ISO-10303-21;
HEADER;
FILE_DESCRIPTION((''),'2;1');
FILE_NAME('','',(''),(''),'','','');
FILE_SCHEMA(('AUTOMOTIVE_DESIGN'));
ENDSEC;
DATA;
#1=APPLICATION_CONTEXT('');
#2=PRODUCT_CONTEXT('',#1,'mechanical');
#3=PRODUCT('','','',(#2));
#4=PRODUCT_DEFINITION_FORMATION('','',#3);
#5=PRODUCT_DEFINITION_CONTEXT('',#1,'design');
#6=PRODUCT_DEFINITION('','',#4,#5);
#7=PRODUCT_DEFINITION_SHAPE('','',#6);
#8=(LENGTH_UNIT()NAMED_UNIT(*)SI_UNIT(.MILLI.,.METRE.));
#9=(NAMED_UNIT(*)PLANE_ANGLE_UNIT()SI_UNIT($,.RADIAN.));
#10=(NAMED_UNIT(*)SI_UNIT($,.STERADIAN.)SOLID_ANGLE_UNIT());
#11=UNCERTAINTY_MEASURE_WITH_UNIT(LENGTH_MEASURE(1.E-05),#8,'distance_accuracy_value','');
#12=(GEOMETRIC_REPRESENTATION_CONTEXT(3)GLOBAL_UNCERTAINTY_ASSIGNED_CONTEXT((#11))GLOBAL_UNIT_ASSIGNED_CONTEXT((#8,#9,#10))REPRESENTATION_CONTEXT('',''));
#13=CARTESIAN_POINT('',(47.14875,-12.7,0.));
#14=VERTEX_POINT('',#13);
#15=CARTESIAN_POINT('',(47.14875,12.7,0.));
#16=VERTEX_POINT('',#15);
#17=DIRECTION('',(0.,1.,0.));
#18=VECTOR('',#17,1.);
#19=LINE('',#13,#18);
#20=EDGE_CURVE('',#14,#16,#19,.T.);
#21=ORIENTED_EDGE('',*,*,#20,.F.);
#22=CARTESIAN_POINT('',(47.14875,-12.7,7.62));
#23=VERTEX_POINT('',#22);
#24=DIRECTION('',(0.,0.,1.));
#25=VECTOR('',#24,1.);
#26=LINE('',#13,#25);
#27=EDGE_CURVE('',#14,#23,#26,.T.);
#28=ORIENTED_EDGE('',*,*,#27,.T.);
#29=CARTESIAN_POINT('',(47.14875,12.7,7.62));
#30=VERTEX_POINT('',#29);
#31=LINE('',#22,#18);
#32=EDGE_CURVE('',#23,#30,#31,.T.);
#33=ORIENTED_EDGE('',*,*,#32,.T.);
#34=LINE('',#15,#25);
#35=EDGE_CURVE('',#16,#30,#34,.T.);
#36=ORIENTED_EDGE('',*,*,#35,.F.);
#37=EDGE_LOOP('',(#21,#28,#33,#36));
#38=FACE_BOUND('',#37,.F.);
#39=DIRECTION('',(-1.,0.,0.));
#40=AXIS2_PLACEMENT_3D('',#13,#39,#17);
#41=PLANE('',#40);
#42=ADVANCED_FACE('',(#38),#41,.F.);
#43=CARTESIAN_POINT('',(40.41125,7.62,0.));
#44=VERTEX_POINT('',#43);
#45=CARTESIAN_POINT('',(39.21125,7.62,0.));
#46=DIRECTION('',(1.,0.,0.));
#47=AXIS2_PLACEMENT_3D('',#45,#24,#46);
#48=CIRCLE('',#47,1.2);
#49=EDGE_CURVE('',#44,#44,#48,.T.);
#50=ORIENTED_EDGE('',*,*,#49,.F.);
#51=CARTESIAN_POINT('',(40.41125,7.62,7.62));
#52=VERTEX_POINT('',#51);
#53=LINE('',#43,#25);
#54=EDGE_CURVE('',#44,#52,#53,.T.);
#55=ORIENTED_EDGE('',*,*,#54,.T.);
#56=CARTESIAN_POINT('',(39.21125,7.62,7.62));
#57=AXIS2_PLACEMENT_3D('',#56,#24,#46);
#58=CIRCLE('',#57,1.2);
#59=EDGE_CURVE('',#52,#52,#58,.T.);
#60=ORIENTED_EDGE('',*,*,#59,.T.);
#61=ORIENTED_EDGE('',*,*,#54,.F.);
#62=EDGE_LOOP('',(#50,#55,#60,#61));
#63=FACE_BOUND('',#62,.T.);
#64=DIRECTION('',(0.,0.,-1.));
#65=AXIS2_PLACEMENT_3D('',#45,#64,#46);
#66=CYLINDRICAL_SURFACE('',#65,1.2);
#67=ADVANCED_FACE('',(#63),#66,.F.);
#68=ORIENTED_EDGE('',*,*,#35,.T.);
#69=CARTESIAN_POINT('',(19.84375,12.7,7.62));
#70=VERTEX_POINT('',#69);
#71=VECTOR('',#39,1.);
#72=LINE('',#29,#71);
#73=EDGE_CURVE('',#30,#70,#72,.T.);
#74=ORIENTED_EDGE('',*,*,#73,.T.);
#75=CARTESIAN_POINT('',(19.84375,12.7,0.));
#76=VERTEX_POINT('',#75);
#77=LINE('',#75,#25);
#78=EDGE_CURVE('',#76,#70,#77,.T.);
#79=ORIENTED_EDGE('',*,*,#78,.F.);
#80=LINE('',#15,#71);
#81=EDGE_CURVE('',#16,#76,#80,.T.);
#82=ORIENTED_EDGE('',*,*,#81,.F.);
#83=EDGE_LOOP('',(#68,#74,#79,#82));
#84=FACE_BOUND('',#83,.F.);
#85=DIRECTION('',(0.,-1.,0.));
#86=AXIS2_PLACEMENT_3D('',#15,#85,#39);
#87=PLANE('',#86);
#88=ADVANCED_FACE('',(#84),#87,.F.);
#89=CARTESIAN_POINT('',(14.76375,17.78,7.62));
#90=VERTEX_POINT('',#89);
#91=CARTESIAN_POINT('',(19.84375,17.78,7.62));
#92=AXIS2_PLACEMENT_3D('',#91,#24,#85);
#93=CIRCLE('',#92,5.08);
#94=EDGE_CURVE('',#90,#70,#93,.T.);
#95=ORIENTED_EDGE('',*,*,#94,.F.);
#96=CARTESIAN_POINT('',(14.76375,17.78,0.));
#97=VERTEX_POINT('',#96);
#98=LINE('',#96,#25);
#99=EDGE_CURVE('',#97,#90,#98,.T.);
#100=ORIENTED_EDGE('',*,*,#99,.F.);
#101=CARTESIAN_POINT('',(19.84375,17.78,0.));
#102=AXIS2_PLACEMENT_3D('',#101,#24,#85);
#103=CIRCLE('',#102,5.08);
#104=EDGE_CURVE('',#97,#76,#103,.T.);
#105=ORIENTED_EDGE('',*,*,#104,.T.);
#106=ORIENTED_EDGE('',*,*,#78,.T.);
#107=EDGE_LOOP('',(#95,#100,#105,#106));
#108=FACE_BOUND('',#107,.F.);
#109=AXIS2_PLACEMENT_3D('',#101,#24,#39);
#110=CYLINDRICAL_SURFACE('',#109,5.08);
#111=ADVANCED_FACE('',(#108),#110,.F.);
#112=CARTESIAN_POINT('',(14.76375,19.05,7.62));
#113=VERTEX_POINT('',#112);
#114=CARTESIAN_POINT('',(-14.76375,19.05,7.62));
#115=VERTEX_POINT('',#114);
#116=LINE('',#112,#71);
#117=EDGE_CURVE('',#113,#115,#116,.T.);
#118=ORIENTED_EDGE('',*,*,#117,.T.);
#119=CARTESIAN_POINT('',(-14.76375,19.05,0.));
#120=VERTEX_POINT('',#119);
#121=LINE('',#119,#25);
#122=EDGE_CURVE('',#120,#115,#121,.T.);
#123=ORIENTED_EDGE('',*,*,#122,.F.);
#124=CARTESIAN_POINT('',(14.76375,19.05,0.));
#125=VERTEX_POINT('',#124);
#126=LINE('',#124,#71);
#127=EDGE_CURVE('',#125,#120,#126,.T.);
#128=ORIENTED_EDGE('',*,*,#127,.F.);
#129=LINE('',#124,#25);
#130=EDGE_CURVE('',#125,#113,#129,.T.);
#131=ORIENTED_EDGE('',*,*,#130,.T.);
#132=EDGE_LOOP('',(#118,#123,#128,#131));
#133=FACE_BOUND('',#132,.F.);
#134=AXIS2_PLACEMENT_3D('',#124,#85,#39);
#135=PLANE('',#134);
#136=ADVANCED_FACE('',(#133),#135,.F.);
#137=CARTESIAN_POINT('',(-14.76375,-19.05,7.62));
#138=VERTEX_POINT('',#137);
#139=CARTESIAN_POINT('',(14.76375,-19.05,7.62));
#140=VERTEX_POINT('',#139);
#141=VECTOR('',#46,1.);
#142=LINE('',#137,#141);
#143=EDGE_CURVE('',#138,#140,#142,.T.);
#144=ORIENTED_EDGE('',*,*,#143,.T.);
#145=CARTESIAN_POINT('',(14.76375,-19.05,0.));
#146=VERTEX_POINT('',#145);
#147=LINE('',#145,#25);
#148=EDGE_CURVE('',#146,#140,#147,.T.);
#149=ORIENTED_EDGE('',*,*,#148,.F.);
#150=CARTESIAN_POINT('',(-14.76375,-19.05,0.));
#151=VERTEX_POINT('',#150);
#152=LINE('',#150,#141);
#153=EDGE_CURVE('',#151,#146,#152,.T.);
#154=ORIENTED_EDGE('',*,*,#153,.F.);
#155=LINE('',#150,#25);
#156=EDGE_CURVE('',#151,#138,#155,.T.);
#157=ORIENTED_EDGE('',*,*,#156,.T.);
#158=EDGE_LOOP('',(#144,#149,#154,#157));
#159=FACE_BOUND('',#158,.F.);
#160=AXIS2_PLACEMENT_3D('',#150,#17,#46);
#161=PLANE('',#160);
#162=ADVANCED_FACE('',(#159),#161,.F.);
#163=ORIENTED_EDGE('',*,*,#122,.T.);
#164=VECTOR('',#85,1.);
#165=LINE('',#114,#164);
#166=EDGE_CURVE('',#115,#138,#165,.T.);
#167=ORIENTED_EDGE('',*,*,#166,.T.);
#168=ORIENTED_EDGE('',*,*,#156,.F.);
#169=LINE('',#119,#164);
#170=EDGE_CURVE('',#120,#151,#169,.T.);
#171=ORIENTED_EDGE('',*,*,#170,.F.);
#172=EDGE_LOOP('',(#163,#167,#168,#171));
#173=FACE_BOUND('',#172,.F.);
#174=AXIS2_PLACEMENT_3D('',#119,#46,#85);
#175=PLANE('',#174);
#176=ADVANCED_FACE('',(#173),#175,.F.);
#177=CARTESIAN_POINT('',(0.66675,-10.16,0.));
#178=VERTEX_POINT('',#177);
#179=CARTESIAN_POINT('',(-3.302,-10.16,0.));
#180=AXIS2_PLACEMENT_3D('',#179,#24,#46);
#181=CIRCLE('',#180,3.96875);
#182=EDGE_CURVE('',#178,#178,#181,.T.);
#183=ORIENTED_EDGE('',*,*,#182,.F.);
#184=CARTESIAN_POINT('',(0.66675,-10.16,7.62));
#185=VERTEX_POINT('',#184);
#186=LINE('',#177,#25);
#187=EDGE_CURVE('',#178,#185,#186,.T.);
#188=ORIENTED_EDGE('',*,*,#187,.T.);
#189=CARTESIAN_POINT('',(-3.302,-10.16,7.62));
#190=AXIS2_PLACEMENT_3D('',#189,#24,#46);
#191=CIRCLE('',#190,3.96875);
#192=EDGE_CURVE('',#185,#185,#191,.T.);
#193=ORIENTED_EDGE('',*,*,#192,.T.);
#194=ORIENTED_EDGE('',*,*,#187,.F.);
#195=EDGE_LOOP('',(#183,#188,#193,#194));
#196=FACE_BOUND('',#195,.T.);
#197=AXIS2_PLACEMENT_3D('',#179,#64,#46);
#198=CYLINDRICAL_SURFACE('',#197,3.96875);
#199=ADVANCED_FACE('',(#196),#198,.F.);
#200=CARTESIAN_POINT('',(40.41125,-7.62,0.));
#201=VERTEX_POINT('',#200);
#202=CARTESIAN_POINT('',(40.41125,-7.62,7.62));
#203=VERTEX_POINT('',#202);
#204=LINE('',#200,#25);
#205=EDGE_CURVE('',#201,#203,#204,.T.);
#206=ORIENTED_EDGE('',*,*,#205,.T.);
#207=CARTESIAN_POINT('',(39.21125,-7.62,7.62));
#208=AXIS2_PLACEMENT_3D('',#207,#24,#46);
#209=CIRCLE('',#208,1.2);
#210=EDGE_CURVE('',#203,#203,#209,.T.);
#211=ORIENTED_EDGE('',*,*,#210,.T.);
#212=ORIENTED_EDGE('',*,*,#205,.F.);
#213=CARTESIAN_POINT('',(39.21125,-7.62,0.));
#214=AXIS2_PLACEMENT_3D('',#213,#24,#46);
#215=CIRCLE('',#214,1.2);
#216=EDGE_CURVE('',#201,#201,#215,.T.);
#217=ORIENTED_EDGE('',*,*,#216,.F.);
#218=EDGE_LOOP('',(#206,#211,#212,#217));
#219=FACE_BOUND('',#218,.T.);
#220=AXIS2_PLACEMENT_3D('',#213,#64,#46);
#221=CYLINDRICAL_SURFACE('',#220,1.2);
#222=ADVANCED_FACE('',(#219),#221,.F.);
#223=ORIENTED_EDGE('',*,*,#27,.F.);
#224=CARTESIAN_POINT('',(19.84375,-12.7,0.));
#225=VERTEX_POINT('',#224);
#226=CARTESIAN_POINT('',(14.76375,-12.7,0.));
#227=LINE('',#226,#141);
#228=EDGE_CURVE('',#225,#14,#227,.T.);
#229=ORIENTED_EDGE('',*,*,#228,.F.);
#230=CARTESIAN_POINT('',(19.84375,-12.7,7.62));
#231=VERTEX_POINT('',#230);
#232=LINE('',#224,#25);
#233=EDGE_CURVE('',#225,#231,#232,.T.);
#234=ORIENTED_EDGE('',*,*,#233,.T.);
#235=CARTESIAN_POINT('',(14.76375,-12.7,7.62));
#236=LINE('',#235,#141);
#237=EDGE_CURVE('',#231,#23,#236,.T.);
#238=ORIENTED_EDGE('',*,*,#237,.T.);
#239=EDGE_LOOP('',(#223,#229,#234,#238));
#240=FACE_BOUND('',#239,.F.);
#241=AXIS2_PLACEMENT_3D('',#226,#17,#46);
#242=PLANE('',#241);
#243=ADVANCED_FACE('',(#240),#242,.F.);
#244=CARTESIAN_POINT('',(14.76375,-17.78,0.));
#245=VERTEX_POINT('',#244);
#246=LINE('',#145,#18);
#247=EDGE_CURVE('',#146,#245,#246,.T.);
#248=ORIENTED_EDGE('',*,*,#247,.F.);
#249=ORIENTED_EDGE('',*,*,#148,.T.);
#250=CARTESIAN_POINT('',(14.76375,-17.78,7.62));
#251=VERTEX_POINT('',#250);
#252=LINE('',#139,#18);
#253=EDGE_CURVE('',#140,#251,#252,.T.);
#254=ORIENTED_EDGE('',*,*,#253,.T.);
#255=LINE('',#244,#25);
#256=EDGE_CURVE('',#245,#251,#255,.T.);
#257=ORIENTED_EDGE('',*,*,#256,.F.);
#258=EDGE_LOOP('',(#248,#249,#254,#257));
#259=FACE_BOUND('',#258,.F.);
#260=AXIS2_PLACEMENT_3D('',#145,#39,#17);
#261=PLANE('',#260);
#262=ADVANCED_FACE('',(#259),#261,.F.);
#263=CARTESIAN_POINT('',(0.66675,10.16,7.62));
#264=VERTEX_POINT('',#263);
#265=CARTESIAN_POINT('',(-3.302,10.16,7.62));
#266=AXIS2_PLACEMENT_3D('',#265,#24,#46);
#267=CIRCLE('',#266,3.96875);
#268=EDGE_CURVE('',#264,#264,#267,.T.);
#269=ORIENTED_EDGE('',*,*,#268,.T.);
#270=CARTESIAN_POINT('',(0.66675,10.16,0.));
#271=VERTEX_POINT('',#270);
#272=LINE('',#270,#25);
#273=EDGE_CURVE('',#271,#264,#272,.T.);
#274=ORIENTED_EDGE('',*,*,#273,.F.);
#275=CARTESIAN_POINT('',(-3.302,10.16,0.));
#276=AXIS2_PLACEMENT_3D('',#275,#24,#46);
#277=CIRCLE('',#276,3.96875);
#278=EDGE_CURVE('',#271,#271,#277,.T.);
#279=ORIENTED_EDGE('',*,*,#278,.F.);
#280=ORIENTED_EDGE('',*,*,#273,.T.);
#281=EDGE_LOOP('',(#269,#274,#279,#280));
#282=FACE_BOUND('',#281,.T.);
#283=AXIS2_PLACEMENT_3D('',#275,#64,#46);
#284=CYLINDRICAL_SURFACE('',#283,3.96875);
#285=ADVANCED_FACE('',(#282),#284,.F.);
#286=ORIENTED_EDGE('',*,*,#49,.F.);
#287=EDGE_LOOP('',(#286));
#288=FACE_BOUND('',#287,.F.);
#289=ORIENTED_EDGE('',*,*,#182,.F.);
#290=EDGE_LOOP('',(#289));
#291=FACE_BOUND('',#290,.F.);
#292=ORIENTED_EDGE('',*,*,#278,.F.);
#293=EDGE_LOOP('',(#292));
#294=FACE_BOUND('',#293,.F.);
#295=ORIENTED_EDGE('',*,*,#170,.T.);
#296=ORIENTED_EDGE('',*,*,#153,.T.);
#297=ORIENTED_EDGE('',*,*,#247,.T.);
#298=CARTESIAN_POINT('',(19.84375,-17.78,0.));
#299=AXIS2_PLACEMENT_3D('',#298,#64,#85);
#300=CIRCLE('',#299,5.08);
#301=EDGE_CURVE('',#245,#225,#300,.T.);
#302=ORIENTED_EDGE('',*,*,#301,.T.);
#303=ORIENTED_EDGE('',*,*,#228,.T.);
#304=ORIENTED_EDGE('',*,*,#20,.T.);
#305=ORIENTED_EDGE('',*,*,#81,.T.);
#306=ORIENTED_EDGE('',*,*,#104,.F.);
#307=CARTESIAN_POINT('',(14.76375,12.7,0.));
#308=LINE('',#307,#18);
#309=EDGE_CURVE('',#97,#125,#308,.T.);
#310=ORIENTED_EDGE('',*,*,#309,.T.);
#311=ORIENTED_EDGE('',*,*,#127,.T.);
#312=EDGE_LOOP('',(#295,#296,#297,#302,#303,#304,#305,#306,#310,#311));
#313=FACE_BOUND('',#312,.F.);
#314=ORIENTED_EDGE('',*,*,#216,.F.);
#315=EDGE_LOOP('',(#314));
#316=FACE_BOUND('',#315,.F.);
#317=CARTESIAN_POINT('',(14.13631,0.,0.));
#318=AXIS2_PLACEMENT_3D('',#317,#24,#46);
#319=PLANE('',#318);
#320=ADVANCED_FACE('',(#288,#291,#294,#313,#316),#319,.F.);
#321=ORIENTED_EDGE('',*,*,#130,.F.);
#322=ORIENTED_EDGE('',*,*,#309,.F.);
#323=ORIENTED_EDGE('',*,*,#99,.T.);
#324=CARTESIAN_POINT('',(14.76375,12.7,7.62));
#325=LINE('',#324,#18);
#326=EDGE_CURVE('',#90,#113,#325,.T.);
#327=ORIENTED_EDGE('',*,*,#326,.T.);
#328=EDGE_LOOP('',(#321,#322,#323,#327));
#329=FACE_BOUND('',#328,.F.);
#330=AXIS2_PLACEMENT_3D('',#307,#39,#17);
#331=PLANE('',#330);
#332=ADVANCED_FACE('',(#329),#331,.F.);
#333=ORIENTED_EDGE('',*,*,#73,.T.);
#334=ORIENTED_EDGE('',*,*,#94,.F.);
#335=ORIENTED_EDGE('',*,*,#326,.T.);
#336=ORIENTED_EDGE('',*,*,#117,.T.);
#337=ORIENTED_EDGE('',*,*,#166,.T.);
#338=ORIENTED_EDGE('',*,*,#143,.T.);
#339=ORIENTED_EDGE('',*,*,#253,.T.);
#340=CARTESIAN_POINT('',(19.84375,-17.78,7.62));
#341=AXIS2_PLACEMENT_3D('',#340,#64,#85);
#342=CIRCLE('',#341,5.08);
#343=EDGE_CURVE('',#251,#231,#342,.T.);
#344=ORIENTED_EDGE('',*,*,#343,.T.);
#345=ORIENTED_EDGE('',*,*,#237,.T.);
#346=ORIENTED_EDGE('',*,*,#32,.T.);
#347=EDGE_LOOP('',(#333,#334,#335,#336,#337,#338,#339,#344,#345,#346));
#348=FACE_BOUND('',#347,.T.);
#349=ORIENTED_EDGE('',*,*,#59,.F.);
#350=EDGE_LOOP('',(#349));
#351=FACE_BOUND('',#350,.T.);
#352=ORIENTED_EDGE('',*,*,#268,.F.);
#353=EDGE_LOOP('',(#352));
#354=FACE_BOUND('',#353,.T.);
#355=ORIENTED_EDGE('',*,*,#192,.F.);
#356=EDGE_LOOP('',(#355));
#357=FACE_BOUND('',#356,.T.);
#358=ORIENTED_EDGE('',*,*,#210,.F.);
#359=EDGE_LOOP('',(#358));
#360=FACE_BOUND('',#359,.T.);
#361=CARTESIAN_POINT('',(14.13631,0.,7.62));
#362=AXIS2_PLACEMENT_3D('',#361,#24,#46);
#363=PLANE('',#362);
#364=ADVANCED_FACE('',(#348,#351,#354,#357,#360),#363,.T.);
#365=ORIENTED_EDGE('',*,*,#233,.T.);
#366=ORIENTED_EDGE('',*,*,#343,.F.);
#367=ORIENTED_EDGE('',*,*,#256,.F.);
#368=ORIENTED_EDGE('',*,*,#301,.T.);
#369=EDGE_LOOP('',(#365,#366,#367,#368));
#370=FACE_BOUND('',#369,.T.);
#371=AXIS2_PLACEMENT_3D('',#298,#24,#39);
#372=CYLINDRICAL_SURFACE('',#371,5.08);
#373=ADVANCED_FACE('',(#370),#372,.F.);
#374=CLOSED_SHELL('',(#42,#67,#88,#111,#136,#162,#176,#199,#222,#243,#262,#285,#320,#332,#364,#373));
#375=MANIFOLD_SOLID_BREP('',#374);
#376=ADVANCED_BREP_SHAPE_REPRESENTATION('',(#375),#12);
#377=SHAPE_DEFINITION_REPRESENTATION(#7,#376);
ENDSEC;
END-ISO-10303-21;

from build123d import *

# Parameters (mm, degrees)
F0_R     = 3.96875
F0_R_2   = 1.2
F1_DEPTH = 7.62
F2_R     = 5.08


with BuildPart() as f1:
    # F0 (on Top) → F1 (new body)
    with BuildSketch(Plane.XY):
        Polygon((14.76375, 19.05), (-14.76375, 19.05), (-14.76375, 12.7), (-14.76375, -12.7), (-14.76375, -19.05), (14.76375, -19.05), (14.76375, -12.7), (47.14875, -12.7), (47.14875, 12.7), (14.76375, 12.7), align=None)
        with Locations((-3.302, -10.16)):
            Circle(F0_R, mode=Mode.SUBTRACT)
        with Locations((39.21125, -7.62)):
            Circle(F0_R_2, mode=Mode.SUBTRACT)
        with Locations((-3.302, 10.16)):
            Circle(F0_R, mode=Mode.SUBTRACT)
        with Locations((39.21125, 7.62)):
            Circle(F0_R_2, mode=Mode.SUBTRACT)
    extrude(amount=F1_DEPTH)

    # F2
    f2_edges = [f1.edges().sort_by_distance(p)[0] for p in [
        (14.76375, -12.7, 3.81),
        (14.76375, 12.7, 3.81),
    ]]
    fillet(f2_edges, radius=F2_R)


solid = f1.part
